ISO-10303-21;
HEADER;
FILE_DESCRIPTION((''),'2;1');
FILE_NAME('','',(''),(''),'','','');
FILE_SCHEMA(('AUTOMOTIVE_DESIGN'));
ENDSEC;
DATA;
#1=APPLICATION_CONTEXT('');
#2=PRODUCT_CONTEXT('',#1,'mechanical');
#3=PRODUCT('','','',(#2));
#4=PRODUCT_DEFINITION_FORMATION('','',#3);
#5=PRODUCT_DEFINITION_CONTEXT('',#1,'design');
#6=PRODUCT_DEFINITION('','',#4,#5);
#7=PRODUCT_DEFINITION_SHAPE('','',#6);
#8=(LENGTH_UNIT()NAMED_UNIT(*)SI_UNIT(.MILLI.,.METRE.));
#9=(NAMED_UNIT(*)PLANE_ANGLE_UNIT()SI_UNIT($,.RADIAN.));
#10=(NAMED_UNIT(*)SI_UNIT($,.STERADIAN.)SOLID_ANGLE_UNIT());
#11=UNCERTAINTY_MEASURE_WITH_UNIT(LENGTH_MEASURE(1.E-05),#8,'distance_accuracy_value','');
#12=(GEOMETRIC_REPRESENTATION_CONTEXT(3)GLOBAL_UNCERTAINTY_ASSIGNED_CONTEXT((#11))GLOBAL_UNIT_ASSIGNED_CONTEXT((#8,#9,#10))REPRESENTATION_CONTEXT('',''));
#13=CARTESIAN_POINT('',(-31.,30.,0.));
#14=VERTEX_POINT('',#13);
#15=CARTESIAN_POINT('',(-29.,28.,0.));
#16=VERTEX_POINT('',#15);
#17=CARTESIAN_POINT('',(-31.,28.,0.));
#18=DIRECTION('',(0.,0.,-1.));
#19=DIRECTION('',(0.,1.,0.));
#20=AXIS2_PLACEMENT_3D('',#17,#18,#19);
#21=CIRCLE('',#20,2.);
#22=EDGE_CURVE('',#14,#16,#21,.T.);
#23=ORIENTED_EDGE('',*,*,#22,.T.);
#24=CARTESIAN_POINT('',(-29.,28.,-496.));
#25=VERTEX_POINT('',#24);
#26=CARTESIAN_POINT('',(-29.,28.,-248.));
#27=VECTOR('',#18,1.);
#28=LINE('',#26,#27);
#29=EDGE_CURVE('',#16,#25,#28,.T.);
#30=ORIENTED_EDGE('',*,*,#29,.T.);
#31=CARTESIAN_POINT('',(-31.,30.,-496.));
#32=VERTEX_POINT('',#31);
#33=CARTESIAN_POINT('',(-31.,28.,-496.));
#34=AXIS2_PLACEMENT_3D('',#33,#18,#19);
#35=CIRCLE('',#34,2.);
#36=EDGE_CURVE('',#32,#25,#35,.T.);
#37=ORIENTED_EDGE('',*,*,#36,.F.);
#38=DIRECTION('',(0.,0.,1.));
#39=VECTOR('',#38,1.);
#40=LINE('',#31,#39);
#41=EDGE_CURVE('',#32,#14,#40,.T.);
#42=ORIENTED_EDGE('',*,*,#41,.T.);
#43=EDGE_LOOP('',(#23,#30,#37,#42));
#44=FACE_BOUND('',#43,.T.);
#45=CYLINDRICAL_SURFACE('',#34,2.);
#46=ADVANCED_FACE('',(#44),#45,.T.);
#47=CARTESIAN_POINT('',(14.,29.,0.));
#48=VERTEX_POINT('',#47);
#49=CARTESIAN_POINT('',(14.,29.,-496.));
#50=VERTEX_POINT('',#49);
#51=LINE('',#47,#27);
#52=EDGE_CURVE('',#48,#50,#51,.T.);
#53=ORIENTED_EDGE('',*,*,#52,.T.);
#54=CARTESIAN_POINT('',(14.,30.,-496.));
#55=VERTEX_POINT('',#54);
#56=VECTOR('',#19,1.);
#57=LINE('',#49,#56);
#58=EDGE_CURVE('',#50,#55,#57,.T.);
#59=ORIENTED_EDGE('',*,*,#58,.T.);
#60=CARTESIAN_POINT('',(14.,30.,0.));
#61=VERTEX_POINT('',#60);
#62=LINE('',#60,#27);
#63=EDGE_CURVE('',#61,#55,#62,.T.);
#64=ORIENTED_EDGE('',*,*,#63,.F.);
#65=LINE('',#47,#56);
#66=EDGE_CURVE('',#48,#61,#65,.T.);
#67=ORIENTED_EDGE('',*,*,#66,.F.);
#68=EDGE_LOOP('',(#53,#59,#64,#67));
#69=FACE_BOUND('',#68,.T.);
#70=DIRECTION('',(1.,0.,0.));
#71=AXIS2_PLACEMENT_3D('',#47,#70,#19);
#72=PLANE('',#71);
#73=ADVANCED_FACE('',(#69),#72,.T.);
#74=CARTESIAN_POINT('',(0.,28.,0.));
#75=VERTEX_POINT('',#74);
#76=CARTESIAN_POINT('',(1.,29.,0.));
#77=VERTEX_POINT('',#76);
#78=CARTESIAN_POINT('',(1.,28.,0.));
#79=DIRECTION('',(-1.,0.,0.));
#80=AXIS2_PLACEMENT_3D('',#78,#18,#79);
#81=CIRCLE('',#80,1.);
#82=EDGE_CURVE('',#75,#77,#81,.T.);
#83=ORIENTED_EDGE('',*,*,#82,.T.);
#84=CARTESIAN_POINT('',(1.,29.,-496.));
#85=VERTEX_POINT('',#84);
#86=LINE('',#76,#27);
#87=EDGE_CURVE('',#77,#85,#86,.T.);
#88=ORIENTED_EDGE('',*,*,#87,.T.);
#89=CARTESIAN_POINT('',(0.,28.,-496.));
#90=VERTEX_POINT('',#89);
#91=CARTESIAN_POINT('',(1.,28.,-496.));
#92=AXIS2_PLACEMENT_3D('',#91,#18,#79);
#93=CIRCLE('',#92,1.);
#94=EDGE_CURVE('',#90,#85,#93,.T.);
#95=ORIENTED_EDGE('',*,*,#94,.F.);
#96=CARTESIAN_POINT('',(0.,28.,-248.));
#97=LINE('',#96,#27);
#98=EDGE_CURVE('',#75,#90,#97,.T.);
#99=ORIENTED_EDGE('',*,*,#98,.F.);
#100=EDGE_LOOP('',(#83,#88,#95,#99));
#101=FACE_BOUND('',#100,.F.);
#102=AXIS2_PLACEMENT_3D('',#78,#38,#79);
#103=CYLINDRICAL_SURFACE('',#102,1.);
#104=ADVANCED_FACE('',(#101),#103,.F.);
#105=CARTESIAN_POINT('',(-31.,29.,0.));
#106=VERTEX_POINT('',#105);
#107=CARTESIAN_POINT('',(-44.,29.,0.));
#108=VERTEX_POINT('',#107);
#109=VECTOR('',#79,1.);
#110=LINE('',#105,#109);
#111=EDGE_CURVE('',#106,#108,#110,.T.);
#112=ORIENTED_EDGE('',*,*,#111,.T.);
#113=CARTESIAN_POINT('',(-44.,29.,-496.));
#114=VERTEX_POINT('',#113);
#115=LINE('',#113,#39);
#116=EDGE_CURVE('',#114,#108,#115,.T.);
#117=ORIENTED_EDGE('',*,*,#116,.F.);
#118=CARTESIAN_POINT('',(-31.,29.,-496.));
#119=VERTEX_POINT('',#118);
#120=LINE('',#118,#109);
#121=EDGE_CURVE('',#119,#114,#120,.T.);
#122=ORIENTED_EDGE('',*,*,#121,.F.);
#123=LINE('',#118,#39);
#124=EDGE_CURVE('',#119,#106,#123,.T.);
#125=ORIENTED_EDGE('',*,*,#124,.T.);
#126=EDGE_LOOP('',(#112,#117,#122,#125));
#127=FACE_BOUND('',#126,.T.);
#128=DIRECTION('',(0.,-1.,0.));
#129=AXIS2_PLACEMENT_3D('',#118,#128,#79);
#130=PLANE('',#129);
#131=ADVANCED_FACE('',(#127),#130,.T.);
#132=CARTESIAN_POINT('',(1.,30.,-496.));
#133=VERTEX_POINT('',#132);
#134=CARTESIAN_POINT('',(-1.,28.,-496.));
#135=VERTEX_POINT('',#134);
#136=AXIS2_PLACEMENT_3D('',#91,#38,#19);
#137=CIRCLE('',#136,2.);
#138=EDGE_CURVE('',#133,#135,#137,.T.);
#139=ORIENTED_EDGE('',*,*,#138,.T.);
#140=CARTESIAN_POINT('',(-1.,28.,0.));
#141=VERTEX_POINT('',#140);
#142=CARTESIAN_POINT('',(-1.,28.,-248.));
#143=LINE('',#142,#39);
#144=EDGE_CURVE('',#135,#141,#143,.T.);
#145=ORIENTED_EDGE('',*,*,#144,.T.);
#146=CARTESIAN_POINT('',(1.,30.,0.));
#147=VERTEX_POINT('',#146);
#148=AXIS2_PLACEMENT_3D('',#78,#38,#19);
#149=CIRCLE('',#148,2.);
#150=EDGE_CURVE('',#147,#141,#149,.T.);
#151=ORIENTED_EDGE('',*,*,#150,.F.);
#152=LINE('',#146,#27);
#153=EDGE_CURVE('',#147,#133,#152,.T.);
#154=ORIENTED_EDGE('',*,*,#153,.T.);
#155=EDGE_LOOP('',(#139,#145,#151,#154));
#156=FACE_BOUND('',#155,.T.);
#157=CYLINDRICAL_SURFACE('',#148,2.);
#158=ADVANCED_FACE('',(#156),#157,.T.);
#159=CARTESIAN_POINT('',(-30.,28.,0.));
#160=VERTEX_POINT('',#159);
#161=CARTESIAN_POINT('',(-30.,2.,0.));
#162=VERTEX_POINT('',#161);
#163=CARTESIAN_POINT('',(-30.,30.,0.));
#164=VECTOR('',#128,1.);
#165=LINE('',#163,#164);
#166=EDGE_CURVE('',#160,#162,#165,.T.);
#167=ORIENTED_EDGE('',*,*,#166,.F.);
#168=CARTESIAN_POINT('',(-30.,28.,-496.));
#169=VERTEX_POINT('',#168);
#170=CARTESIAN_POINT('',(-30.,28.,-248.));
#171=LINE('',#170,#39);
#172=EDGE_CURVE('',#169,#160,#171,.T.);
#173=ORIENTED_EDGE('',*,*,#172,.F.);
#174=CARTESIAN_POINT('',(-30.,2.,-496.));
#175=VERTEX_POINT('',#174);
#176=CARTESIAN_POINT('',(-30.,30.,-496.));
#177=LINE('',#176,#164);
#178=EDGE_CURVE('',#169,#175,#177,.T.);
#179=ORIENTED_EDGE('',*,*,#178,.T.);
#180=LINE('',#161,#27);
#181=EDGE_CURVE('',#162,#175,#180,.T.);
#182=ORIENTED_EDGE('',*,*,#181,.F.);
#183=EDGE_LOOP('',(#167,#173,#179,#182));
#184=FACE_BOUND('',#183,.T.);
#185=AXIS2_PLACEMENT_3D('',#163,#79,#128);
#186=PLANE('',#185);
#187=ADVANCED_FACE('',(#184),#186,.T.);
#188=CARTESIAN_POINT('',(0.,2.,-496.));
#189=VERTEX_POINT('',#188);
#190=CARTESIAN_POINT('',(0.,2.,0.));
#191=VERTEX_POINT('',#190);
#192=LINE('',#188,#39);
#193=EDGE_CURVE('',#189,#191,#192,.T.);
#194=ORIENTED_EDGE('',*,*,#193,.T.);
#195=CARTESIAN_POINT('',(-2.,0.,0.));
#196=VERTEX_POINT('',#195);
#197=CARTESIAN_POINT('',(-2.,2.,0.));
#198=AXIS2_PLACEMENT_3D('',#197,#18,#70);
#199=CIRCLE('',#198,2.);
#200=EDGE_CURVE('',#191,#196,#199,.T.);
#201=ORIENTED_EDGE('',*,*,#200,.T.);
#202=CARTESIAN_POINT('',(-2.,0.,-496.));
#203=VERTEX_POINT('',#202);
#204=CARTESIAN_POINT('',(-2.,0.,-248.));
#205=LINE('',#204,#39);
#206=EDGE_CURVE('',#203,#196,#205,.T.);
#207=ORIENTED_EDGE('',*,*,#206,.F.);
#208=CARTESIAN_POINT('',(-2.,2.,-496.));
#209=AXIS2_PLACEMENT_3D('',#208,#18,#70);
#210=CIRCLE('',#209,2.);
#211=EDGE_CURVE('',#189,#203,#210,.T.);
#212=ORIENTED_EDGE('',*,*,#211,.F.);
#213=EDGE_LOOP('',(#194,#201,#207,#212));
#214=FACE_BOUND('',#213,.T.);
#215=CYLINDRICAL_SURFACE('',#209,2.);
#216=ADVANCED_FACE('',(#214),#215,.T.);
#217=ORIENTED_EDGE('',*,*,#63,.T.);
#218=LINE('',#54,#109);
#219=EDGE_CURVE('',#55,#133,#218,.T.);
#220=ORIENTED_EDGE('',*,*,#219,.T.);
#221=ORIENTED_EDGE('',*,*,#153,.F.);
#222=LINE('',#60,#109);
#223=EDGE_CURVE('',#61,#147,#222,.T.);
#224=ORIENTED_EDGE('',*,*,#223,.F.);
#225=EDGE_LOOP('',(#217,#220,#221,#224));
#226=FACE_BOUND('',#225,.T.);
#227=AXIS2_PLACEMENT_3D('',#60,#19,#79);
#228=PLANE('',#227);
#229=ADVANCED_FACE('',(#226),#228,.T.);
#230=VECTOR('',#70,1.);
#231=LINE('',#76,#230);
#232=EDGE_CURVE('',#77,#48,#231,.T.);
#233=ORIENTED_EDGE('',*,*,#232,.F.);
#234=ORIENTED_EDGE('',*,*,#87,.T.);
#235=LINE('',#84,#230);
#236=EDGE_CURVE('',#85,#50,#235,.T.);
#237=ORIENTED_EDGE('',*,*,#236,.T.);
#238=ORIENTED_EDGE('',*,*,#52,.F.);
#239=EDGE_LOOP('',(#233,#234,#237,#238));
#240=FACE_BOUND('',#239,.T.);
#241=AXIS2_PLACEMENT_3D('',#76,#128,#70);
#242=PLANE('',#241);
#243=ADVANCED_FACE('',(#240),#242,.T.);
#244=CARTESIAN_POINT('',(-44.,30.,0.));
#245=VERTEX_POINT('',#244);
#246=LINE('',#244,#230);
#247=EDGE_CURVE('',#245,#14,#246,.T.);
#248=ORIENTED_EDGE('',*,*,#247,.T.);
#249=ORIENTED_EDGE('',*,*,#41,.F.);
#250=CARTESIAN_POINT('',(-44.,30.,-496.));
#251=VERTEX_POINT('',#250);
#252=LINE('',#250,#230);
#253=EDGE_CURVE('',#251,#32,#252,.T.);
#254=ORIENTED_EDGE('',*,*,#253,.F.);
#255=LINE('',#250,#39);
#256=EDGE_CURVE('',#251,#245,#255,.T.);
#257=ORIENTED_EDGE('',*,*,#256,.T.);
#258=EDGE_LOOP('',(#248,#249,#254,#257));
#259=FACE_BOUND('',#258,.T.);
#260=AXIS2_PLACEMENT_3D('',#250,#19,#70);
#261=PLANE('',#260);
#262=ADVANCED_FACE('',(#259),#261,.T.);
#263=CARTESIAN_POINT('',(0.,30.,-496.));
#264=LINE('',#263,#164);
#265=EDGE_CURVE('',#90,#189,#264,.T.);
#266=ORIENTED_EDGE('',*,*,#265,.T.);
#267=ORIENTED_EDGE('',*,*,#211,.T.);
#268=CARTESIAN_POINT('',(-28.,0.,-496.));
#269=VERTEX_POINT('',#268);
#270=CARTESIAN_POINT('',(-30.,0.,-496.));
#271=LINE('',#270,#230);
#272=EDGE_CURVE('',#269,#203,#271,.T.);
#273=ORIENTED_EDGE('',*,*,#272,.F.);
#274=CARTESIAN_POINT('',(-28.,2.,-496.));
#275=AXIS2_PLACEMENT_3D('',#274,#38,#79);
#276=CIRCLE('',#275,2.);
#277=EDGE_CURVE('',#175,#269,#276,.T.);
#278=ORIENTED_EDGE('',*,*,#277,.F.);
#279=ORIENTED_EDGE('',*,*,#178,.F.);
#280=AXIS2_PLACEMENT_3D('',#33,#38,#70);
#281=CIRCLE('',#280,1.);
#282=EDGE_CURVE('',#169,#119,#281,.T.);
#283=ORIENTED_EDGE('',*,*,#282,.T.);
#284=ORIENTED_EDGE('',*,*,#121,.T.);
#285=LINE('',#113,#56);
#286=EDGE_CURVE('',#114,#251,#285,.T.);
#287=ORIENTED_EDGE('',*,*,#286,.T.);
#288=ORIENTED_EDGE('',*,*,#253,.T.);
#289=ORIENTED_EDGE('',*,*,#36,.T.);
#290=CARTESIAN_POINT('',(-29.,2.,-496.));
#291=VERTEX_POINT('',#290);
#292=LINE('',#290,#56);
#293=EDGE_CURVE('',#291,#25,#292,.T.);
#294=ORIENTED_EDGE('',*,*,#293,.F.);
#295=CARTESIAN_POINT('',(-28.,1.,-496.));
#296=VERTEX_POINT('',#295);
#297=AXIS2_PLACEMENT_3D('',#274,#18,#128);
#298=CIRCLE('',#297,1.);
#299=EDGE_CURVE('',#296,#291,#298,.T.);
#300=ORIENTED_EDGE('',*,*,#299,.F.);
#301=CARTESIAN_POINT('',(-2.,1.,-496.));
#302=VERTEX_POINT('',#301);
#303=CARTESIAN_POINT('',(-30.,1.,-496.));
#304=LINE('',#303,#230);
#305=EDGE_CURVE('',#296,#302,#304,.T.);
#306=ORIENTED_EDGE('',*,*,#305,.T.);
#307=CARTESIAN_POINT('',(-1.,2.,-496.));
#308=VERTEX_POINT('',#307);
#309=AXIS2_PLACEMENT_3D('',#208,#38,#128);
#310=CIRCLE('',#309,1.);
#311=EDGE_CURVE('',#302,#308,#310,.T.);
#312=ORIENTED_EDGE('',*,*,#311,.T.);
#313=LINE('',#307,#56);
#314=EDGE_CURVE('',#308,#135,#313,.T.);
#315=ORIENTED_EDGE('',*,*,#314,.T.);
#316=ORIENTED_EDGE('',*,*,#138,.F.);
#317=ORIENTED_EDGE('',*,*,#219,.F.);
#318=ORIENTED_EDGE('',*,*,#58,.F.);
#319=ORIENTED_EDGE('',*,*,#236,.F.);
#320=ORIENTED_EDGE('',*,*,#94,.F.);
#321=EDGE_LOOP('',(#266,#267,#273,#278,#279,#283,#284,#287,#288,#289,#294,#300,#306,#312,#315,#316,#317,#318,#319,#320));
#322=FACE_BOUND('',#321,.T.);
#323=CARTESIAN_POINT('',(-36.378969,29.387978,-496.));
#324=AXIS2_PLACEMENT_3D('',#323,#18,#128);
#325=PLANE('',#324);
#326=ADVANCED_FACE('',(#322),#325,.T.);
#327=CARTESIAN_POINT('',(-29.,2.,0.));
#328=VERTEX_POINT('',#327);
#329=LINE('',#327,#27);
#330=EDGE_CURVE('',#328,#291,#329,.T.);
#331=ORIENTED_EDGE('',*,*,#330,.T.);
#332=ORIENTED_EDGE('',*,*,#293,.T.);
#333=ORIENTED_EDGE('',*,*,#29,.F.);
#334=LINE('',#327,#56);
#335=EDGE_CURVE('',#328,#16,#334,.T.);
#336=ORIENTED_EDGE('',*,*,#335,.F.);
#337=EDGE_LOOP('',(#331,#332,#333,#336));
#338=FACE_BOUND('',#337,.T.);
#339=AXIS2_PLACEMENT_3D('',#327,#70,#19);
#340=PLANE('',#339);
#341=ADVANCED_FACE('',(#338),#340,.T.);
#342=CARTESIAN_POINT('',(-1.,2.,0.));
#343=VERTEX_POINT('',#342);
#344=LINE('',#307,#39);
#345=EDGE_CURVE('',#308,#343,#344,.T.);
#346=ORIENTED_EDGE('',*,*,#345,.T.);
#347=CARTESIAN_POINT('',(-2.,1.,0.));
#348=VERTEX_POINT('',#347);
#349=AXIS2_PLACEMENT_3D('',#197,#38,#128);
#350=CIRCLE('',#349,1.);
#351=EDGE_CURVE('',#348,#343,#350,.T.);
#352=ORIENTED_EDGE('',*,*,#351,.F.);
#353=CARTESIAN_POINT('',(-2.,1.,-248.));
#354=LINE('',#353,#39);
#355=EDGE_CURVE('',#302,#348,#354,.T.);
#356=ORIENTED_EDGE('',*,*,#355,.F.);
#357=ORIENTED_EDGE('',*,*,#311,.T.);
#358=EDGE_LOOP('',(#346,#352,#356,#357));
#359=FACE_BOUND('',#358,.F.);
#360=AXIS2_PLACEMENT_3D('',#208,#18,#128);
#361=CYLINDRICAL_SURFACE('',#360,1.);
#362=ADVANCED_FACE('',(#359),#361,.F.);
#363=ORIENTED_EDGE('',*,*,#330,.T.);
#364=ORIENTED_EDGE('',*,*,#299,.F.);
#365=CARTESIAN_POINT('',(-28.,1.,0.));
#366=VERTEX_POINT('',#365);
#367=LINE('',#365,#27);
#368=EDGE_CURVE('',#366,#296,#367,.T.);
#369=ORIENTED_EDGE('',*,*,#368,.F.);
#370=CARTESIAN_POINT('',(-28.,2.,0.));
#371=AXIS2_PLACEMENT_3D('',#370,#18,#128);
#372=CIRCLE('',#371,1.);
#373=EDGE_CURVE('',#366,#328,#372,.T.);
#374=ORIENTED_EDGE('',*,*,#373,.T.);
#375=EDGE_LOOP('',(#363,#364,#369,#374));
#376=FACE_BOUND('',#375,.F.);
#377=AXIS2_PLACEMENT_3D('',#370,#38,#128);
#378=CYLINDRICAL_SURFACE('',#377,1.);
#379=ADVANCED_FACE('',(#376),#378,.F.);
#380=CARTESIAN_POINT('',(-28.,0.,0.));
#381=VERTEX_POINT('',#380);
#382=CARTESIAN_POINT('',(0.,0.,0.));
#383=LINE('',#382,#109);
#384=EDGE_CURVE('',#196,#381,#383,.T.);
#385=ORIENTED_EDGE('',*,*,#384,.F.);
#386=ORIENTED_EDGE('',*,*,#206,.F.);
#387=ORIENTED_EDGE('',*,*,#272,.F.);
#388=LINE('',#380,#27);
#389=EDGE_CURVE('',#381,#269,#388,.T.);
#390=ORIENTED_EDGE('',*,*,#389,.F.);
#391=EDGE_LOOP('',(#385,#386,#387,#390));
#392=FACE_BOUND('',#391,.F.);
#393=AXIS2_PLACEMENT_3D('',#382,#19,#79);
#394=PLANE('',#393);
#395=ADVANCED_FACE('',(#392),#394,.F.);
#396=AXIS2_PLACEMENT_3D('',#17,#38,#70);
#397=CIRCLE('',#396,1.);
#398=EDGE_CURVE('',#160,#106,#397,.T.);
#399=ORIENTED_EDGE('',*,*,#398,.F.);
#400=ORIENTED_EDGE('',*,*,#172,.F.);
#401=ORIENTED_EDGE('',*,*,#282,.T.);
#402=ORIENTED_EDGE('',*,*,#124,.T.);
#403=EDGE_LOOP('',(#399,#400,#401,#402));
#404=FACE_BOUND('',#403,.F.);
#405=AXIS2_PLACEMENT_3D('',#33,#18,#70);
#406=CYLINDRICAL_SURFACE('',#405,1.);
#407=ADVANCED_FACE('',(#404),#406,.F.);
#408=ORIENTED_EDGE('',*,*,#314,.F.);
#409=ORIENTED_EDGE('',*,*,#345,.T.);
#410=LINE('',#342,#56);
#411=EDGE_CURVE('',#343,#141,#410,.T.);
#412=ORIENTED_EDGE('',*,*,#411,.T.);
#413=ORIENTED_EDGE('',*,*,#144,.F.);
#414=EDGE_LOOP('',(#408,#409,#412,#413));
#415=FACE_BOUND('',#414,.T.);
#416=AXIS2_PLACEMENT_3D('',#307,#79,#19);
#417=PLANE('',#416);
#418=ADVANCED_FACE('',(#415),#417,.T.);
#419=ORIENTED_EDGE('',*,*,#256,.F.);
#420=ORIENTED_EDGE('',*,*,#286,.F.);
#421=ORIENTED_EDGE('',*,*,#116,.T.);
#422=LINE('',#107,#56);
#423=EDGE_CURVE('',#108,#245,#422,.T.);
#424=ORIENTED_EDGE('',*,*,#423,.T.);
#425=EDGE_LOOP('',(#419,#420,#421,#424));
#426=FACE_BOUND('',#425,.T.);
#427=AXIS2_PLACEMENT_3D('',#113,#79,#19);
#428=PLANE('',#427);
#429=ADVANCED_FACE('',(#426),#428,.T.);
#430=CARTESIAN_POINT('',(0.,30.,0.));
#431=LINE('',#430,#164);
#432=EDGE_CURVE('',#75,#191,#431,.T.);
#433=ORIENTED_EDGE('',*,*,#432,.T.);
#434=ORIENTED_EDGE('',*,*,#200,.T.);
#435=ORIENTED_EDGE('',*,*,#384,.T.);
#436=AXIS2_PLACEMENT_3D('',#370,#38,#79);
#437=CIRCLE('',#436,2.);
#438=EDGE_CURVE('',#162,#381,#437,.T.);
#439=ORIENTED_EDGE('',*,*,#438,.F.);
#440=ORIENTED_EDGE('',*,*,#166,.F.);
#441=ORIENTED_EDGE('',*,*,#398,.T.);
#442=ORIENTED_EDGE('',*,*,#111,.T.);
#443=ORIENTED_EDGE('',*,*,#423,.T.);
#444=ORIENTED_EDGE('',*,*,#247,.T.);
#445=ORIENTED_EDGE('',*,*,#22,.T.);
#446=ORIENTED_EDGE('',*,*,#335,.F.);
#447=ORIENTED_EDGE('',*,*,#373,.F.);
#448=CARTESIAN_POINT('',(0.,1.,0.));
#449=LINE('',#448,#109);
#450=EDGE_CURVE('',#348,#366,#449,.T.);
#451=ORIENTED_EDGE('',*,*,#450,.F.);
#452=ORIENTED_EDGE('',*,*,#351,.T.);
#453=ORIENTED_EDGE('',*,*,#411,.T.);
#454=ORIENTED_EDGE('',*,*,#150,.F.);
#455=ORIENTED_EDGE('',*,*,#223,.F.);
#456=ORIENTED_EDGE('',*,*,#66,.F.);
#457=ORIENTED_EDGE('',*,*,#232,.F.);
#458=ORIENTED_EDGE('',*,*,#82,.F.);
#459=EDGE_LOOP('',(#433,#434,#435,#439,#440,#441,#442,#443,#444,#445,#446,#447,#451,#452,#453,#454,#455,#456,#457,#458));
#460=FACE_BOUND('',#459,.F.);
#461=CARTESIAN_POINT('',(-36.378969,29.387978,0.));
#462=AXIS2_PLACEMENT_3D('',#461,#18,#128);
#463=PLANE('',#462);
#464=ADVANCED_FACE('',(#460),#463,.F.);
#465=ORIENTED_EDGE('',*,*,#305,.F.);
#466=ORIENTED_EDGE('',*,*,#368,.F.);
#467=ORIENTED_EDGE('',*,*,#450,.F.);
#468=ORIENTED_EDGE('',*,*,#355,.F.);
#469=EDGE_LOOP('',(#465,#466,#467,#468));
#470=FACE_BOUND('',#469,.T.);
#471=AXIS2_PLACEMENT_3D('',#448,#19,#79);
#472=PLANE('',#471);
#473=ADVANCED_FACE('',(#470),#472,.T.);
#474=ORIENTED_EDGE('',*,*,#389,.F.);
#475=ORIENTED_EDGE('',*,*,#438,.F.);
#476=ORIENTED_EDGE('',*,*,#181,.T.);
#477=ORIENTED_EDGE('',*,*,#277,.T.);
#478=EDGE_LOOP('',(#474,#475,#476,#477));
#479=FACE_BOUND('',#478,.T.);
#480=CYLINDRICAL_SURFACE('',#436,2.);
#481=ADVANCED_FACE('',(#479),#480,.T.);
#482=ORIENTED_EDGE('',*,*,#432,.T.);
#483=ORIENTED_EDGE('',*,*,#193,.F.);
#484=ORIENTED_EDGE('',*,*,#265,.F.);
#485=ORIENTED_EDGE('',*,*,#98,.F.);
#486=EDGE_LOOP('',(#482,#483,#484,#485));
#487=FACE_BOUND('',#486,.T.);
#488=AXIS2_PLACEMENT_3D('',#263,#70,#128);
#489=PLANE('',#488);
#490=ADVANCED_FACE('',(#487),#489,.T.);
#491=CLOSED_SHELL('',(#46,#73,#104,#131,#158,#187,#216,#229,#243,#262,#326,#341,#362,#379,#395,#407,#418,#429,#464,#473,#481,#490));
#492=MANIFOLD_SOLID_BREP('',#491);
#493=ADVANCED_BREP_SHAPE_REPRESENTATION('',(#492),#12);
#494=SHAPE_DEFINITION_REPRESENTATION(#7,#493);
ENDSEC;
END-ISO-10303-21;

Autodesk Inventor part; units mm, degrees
ref_plane "YZ Plane" through (0, 0, 0) normal (1, 0, 0) x (0, 1, 0)
ref_plane "XZ Plane" through (0, 0, 0) normal (0, 1, 0) x (-1, 0, 0)
ref_plane "XY Plane" through (0, 0, 0) normal (0, 0, 1) x (1, 0, 0)
sketch "Sketch1" plane through (0, 0, 0) normal (0, 1, 0) x (-1, 0, 0)
  line L0 (0, 0) -> (30, 0)
  line L1 (30, 0) -> (30, -496)
  line L2 (30, -496) -> (0, -496)
  line L3 (0, -496) -> (0, 0)
  dimension "d0" = 30
  dimension "d1" = 496
extrude "Plate1" add sketch "Sketch1" along normal blind 1
sketch "Sketch2" plane through (-29, 0, 0) normal (-1, 0, 0) x (0, -1, 0)
  line L0 (0, -496) -> (0, 0)
  line L1 (0, 0) -> (-30, 0)
  line L2 (-30, 0) -> (-30, -496)
  line L3 (-30, -496) -> (0, -496)
edge flange "Flange1" height 30 angle 90 thickness 1 bend radius 1 thickness toward (-1, 0, 0) relief tear relief width 1 relief depth 0.5 corner gap 1 corner form 0 edges at (-30, 1, -248) (0, 1, -248) wall of the first edge with corners at (-29, 0, -496) (-29, 0, 0) (-29, 30, 0) (-29, 30, -496)
bend "Bend1"
corner "Corner1"
sketch "Sketch3" plane through (-29, 29, -496) normal (0, 1, 0) x (-1, 0, 0)
  line L0 (0, 496) -> (0, 0)
  line L1 (0, 0) -> (15, 0)
  line L2 (15, 0) -> (15, 496)
  line L3 (15, 496) -> (0, 496)
edge flange "Flange2" height 15 angle 90 thickness 1 bend radius 1 thickness toward (0, 1, 0) relief tear relief width 1 relief depth 0.5 corner gap 1 corner form 0 edges at (-30, 30, -248) (0, 30, -248) wall of the first edge with corners at (-29, 29, 0) (-29, 29, -496) (-44, 29, -496) (-44, 29, 0)
bend "Bend2"
corner "Corner2"
equation "\"d2\" = Thickness"
equation "\"d3\" = BendReliefWidth"
equation "\"d4\" = BendReliefDepth"
equation "\"d5\" = MinimumRemnant"
equation "\"d6\" = TransitionRadius"
equation "\"d9\" = BendRadius"
equation "\"d10\" = CornerReliefSize"
equation "\"d11\" = GapSize"
equation "\"d12\" = JacobiRadiusSize"
equation "\"d13\" = BendReliefWidth"
equation "\"d14\" = BendReliefDepth"
equation "\"d15\" = MinimumRemnant"
equation "\"d16\" = TransitionRadius"
equation "\"d19\" = BendRadius"
equation "\"d20\" = CornerReliefSize"
equation "\"d21\" = GapSize"
equation "\"d22\" = JacobiRadiusSize"
equation "\"BendRadius\" = Thickness"
equation "\"BendReliefWidth\" = Thickness"
equation "\"BendReliefDepth\" = 0.5 * Thickness"
equation "\"CornerReliefSize\" = 4 * Thickness"
equation "\"MinimumRemnant\" = 2 * Thickness"
equation "\"TransitionRadius\" = BendRadius"
equation "\"JacobiRadiusSize\" = BendRadius"
equation "\"GapSize\" = Thickness"
equation "\"Thickness\" = 1"
properties part number "Stringer" material "Aluminum 6061"
